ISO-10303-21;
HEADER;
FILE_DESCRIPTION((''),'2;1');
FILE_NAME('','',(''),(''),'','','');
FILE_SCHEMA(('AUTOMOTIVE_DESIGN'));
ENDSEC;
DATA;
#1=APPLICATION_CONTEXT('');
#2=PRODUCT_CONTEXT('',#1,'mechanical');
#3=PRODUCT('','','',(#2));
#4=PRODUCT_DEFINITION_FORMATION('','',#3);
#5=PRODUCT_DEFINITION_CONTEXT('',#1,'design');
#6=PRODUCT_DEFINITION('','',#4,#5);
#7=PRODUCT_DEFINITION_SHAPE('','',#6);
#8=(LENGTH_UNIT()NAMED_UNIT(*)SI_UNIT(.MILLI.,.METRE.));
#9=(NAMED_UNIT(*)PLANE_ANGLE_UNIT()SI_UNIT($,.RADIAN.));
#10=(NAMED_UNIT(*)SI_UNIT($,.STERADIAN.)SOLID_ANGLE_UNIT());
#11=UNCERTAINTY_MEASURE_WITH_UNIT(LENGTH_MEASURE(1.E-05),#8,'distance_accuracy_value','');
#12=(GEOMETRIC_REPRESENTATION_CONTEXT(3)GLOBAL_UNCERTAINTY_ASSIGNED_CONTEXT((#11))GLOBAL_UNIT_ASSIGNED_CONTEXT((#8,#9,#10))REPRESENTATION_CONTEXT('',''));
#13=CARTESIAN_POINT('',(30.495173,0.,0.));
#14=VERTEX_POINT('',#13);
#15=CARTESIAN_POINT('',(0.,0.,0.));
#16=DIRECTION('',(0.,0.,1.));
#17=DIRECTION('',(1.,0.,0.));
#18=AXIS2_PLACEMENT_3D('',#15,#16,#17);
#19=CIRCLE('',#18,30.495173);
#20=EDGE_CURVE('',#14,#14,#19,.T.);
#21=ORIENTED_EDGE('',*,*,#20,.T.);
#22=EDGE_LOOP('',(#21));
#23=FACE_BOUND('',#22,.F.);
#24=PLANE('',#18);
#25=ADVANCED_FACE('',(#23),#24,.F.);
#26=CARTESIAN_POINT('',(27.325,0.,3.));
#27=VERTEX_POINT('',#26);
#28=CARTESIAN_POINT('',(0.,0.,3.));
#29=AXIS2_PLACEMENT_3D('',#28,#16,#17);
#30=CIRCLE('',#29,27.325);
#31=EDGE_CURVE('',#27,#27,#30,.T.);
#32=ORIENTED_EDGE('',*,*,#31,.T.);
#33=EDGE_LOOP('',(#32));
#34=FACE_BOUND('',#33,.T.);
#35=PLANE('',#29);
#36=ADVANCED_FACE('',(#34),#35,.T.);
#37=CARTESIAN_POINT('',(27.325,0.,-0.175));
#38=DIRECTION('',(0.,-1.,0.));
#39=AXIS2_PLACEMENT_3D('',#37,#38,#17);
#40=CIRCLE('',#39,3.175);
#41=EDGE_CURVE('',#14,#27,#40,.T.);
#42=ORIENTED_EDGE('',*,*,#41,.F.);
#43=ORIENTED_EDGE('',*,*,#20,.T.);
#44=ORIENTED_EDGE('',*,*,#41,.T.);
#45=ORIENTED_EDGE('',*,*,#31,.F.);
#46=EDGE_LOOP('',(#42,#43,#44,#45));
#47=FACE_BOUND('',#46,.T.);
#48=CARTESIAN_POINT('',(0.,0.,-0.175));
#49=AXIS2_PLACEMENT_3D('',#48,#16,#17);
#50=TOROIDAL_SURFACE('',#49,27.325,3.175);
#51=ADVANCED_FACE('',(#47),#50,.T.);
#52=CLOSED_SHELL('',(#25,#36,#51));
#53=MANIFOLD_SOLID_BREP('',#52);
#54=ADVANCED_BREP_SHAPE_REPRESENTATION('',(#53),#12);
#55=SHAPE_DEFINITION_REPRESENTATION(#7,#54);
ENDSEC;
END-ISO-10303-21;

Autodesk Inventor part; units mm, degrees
ref_plane "YZ Plane" through (0, 0, 0) normal (1, 0, 0) x (0, 1, 0)
ref_plane "XZ Plane" through (0, 0, 0) normal (0, 1, 0) x (-1, 0, 0)
ref_plane "XY Plane" through (0, 0, 0) normal (0, 0, 1) x (1, 0, 0)
sketch "Sketch1" plane through (0, 0, 0) normal (0, 0, 1) x (1, 0, 0)
  circle A0 centre (0, 0) radius 30.5
  dimension "d0" = 61
extrude "Extrusion1" add sketch "Sketch1" along normal blind 3
fillet "Fillet1" radius 3.175 1 edges at (-30.5, 0, 3)
properties part number "Necklacepcbback"
